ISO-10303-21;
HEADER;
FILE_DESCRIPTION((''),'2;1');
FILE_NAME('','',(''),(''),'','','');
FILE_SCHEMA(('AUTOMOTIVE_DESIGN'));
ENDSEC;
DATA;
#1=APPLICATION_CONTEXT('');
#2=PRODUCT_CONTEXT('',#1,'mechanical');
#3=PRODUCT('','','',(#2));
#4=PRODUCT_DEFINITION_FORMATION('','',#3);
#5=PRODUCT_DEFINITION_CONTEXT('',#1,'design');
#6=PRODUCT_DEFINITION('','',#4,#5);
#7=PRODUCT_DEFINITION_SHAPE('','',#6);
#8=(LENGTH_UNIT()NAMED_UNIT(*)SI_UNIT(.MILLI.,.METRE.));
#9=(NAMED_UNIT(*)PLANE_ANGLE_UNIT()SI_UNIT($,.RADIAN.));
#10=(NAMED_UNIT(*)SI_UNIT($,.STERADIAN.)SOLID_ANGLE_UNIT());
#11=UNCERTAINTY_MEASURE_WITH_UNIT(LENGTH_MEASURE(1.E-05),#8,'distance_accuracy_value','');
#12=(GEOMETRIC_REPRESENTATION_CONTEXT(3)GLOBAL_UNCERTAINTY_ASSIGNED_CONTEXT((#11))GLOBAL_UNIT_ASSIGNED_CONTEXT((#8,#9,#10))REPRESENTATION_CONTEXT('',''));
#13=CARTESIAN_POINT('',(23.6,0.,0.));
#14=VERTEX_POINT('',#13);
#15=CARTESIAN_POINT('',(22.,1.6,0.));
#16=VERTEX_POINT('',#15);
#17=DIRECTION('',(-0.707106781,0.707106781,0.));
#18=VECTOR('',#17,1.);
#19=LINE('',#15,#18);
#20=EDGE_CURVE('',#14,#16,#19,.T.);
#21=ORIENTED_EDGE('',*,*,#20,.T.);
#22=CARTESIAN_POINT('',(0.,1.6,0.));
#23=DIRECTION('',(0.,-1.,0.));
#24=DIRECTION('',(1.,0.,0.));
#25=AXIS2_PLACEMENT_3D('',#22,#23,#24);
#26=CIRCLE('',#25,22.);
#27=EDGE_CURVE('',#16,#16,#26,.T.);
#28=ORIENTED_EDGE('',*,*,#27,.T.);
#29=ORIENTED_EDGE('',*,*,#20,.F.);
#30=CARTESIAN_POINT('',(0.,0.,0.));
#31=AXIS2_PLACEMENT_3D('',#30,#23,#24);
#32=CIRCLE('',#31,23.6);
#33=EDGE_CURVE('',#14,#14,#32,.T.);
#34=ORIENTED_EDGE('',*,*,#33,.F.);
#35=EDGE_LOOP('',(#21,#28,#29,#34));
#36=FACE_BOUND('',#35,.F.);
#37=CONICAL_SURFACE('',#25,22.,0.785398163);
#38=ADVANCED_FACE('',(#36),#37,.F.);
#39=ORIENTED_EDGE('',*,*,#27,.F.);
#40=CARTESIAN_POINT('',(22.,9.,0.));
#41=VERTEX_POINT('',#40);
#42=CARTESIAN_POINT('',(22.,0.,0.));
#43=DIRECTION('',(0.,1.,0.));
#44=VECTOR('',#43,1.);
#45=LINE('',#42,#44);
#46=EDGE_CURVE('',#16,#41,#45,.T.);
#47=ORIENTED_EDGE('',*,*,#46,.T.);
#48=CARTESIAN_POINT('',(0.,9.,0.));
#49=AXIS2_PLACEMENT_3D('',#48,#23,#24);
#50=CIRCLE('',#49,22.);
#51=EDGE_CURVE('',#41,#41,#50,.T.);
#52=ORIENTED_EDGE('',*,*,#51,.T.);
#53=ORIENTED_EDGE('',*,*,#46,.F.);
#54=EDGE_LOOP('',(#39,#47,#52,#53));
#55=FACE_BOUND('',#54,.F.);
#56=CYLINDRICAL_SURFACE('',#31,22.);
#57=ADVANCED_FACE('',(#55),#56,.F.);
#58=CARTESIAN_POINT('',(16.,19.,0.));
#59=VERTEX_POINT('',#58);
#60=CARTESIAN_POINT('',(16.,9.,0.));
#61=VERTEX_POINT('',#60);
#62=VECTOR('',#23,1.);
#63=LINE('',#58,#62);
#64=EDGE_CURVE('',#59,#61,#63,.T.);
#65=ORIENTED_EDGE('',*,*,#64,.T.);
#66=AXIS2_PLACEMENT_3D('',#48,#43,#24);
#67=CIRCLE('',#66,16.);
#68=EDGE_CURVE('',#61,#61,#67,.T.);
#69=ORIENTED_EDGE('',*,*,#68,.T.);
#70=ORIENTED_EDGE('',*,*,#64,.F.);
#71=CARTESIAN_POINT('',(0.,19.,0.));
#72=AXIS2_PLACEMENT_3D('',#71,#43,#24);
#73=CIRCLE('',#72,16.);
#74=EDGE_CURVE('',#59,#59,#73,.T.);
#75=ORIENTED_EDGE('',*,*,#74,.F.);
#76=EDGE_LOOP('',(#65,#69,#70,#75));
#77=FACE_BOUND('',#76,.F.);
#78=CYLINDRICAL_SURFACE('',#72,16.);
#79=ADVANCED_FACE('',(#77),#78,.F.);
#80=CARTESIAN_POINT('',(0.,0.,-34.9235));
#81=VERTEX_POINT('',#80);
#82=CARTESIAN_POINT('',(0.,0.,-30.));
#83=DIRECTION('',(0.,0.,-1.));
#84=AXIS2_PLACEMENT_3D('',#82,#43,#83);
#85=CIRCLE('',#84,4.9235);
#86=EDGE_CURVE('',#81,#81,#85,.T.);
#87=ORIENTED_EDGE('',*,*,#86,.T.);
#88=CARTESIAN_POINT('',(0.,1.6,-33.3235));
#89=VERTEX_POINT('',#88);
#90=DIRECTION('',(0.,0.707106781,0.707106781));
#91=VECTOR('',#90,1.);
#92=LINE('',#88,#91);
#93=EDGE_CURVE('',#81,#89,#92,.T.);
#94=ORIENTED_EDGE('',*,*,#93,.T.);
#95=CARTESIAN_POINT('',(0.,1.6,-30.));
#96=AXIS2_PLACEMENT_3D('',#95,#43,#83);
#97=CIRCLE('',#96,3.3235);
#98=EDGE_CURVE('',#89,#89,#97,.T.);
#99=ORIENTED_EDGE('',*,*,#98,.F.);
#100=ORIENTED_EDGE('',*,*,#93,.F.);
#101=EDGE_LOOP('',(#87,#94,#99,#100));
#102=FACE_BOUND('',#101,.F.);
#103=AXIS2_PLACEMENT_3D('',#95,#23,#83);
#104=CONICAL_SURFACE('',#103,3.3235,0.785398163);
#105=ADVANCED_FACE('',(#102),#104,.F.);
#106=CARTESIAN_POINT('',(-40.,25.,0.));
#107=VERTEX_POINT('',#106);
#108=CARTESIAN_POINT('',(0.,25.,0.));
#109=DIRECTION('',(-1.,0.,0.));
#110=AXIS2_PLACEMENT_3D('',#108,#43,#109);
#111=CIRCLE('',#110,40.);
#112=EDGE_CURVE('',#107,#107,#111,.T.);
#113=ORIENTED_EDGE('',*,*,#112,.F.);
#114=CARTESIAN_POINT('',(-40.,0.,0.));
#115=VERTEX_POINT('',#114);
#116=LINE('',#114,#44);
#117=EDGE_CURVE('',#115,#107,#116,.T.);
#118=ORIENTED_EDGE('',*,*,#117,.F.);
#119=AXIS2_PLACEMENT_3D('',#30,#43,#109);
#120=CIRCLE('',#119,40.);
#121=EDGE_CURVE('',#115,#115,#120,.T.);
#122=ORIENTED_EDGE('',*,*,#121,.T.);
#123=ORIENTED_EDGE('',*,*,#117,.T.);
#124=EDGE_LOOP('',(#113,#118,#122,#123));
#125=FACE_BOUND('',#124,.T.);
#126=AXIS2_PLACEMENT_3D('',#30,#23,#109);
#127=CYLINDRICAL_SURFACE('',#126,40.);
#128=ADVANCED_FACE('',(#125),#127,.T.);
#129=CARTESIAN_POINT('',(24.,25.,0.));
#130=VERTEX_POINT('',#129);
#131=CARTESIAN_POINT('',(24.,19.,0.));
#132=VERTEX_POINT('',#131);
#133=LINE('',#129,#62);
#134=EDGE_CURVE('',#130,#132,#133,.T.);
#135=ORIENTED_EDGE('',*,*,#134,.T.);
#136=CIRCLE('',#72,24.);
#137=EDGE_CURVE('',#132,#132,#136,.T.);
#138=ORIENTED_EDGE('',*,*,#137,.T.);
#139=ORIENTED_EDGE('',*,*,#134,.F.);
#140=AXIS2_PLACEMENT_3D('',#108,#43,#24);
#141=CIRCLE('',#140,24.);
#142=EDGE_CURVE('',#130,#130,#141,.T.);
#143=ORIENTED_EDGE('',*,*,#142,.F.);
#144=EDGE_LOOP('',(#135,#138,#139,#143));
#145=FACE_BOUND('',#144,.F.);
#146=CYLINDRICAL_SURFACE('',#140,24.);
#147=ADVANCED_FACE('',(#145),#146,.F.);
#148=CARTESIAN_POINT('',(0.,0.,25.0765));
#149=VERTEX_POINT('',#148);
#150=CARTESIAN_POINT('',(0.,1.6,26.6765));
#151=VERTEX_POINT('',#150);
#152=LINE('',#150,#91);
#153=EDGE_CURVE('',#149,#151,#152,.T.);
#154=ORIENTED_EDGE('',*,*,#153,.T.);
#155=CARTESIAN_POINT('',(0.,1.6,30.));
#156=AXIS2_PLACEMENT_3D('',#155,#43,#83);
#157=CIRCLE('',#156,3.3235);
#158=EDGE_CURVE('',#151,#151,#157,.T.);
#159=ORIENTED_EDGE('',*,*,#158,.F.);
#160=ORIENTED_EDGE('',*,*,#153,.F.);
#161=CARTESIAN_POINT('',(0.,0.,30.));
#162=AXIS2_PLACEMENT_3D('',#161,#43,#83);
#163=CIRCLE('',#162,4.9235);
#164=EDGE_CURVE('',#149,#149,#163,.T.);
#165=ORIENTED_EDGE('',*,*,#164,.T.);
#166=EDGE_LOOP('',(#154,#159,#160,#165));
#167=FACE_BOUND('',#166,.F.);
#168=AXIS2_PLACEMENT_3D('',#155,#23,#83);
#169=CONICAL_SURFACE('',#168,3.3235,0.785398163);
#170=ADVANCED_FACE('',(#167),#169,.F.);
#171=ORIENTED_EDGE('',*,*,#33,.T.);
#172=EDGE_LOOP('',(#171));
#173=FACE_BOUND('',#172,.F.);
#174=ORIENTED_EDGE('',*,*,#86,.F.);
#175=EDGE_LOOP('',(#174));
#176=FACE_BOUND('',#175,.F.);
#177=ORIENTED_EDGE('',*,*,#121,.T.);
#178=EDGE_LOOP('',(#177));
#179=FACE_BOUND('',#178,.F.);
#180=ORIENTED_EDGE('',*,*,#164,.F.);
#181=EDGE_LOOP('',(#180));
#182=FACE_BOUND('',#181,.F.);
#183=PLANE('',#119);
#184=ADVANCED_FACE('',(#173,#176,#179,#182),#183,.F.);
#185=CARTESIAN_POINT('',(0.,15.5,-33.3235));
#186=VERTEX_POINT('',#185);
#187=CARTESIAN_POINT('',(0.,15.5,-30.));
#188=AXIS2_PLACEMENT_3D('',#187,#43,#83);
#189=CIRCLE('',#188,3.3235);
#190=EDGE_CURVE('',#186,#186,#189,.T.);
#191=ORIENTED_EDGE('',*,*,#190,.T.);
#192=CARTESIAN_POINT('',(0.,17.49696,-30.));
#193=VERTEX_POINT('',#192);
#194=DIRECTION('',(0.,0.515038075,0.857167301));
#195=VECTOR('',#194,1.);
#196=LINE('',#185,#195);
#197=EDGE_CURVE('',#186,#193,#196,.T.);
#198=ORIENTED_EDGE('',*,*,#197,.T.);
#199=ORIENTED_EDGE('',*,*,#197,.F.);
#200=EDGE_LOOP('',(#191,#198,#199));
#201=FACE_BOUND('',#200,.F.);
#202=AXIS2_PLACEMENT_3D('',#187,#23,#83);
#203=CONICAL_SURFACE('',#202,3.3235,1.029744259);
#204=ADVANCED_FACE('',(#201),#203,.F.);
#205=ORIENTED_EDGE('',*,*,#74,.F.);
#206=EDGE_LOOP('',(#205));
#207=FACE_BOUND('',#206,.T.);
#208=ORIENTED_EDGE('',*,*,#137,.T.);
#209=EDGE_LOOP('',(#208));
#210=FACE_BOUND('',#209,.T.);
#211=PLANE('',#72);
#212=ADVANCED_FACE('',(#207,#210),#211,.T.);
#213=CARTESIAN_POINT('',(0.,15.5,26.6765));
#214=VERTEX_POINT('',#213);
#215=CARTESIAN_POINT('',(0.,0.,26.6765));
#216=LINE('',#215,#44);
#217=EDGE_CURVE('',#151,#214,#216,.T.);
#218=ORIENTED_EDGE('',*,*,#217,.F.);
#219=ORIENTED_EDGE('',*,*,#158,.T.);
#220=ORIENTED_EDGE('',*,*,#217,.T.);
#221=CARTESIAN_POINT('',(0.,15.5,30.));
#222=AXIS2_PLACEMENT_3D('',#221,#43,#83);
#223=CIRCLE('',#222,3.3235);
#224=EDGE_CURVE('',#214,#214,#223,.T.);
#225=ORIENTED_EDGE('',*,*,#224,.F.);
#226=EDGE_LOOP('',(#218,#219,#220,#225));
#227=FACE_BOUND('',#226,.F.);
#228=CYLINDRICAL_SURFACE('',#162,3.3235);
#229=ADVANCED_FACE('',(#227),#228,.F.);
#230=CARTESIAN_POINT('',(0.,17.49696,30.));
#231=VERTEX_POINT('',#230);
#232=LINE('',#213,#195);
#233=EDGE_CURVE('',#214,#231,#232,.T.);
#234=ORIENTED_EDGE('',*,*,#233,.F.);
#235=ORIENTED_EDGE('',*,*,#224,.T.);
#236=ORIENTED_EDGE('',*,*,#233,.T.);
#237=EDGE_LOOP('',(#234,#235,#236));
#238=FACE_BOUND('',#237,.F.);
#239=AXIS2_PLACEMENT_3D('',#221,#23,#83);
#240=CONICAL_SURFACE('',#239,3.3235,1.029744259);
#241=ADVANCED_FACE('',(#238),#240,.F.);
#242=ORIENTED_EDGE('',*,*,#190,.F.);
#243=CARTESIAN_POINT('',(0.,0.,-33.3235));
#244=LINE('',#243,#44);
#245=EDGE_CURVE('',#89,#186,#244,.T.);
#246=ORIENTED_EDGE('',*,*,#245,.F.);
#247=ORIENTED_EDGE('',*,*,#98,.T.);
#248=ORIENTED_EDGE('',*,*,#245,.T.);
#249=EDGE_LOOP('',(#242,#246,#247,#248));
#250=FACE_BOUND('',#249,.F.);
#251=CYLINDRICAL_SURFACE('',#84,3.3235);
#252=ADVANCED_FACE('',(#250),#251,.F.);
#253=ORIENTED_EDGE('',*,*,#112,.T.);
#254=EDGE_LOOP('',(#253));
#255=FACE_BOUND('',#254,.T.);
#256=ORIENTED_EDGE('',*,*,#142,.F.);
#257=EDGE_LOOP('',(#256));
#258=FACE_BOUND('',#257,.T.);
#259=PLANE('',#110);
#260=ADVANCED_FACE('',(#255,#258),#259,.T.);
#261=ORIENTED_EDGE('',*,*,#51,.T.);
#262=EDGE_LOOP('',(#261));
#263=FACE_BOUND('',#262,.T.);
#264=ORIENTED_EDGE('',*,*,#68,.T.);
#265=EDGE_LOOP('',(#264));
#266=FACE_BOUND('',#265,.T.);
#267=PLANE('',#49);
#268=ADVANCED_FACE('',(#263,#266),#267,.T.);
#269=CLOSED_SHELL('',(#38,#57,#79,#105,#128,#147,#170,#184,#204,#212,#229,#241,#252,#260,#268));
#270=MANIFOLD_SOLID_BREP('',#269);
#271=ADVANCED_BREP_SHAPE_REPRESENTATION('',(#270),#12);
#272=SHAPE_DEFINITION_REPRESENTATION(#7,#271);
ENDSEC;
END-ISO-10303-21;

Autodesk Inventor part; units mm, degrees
ref_plane "YZ Plane" through (0, 0, 0) normal (1, 0, 0) x (0, 1, 0)
ref_plane "XZ Plane" through (0, 0, 0) normal (0, 1, 0) x (-1, 0, 0)
ref_plane "XY Plane" through (0, 0, 0) normal (0, 0, 1) x (1, 0, 0)
sketch "Эскиз1" plane through (0, 0, 0) normal (0, 1, 0) x (-1, 0, 0)
  circle A0 centre (0, 0) radius 40
  dimension "d0" = 80
extrude "Выдавливание1" add sketch "Эскиз1" along normal blind 25
sketch "Эскиз2" plane through (0, 25, 0) normal (0, 1, 0) x (1, 0, 0)
  circle A0 centre (0, 0) radius 24
  dimension "d3" = 48
extrude "Выдавливание2" cut sketch "Эскиз2" against normal blind 6
sketch "Эскиз3" plane through (0, 19, 0) normal (0, 1, 0) x (1, 0, 0)
  circle A0 centre (0, 0) radius 16
  dimension "d6" = 32
extrude "Выдавливание3" cut sketch "Эскиз3" against normal blind 55.25
sketch "Эскиз4" plane through (0, 0, 0) normal (0, -1, 0) x (1, 0, 0)
  circle A0 centre (0, 0) radius 22
  dimension "d9" = 44
extrude "Выдавливание4" cut sketch "Эскиз4" against normal blind 9
chamfer "Фаска1" distance 1.6 angle 45 1 edges at (-22, 0, 0)
sketch "Эскиз5" plane through (0, 0, 0) normal (0, -1, 0) x (1, 0, 0)
  point P0 (0, 0)
  point P1 (0, 30)
  point P2 (0, -30)
  dimension "d15" = 30
  dimension "d16" = 30
hole "Отверстие1" at (0, 0, 30) at (0, 0, -30) direction (0, 1, 0) diameter 6.647 depth 15.5 tip angle 118 thread size "M8x1.25" class "6H" standard "ANSI Metric M Profile"
chamfer "Фаска2" distance 1.6 angle 45 1 edges at (0, 0, 33.3235)
chamfer "Фаска3" distance 1.6 angle 45 1 edges at (0, 0, -26.6765)
properties part number "Корпус"
